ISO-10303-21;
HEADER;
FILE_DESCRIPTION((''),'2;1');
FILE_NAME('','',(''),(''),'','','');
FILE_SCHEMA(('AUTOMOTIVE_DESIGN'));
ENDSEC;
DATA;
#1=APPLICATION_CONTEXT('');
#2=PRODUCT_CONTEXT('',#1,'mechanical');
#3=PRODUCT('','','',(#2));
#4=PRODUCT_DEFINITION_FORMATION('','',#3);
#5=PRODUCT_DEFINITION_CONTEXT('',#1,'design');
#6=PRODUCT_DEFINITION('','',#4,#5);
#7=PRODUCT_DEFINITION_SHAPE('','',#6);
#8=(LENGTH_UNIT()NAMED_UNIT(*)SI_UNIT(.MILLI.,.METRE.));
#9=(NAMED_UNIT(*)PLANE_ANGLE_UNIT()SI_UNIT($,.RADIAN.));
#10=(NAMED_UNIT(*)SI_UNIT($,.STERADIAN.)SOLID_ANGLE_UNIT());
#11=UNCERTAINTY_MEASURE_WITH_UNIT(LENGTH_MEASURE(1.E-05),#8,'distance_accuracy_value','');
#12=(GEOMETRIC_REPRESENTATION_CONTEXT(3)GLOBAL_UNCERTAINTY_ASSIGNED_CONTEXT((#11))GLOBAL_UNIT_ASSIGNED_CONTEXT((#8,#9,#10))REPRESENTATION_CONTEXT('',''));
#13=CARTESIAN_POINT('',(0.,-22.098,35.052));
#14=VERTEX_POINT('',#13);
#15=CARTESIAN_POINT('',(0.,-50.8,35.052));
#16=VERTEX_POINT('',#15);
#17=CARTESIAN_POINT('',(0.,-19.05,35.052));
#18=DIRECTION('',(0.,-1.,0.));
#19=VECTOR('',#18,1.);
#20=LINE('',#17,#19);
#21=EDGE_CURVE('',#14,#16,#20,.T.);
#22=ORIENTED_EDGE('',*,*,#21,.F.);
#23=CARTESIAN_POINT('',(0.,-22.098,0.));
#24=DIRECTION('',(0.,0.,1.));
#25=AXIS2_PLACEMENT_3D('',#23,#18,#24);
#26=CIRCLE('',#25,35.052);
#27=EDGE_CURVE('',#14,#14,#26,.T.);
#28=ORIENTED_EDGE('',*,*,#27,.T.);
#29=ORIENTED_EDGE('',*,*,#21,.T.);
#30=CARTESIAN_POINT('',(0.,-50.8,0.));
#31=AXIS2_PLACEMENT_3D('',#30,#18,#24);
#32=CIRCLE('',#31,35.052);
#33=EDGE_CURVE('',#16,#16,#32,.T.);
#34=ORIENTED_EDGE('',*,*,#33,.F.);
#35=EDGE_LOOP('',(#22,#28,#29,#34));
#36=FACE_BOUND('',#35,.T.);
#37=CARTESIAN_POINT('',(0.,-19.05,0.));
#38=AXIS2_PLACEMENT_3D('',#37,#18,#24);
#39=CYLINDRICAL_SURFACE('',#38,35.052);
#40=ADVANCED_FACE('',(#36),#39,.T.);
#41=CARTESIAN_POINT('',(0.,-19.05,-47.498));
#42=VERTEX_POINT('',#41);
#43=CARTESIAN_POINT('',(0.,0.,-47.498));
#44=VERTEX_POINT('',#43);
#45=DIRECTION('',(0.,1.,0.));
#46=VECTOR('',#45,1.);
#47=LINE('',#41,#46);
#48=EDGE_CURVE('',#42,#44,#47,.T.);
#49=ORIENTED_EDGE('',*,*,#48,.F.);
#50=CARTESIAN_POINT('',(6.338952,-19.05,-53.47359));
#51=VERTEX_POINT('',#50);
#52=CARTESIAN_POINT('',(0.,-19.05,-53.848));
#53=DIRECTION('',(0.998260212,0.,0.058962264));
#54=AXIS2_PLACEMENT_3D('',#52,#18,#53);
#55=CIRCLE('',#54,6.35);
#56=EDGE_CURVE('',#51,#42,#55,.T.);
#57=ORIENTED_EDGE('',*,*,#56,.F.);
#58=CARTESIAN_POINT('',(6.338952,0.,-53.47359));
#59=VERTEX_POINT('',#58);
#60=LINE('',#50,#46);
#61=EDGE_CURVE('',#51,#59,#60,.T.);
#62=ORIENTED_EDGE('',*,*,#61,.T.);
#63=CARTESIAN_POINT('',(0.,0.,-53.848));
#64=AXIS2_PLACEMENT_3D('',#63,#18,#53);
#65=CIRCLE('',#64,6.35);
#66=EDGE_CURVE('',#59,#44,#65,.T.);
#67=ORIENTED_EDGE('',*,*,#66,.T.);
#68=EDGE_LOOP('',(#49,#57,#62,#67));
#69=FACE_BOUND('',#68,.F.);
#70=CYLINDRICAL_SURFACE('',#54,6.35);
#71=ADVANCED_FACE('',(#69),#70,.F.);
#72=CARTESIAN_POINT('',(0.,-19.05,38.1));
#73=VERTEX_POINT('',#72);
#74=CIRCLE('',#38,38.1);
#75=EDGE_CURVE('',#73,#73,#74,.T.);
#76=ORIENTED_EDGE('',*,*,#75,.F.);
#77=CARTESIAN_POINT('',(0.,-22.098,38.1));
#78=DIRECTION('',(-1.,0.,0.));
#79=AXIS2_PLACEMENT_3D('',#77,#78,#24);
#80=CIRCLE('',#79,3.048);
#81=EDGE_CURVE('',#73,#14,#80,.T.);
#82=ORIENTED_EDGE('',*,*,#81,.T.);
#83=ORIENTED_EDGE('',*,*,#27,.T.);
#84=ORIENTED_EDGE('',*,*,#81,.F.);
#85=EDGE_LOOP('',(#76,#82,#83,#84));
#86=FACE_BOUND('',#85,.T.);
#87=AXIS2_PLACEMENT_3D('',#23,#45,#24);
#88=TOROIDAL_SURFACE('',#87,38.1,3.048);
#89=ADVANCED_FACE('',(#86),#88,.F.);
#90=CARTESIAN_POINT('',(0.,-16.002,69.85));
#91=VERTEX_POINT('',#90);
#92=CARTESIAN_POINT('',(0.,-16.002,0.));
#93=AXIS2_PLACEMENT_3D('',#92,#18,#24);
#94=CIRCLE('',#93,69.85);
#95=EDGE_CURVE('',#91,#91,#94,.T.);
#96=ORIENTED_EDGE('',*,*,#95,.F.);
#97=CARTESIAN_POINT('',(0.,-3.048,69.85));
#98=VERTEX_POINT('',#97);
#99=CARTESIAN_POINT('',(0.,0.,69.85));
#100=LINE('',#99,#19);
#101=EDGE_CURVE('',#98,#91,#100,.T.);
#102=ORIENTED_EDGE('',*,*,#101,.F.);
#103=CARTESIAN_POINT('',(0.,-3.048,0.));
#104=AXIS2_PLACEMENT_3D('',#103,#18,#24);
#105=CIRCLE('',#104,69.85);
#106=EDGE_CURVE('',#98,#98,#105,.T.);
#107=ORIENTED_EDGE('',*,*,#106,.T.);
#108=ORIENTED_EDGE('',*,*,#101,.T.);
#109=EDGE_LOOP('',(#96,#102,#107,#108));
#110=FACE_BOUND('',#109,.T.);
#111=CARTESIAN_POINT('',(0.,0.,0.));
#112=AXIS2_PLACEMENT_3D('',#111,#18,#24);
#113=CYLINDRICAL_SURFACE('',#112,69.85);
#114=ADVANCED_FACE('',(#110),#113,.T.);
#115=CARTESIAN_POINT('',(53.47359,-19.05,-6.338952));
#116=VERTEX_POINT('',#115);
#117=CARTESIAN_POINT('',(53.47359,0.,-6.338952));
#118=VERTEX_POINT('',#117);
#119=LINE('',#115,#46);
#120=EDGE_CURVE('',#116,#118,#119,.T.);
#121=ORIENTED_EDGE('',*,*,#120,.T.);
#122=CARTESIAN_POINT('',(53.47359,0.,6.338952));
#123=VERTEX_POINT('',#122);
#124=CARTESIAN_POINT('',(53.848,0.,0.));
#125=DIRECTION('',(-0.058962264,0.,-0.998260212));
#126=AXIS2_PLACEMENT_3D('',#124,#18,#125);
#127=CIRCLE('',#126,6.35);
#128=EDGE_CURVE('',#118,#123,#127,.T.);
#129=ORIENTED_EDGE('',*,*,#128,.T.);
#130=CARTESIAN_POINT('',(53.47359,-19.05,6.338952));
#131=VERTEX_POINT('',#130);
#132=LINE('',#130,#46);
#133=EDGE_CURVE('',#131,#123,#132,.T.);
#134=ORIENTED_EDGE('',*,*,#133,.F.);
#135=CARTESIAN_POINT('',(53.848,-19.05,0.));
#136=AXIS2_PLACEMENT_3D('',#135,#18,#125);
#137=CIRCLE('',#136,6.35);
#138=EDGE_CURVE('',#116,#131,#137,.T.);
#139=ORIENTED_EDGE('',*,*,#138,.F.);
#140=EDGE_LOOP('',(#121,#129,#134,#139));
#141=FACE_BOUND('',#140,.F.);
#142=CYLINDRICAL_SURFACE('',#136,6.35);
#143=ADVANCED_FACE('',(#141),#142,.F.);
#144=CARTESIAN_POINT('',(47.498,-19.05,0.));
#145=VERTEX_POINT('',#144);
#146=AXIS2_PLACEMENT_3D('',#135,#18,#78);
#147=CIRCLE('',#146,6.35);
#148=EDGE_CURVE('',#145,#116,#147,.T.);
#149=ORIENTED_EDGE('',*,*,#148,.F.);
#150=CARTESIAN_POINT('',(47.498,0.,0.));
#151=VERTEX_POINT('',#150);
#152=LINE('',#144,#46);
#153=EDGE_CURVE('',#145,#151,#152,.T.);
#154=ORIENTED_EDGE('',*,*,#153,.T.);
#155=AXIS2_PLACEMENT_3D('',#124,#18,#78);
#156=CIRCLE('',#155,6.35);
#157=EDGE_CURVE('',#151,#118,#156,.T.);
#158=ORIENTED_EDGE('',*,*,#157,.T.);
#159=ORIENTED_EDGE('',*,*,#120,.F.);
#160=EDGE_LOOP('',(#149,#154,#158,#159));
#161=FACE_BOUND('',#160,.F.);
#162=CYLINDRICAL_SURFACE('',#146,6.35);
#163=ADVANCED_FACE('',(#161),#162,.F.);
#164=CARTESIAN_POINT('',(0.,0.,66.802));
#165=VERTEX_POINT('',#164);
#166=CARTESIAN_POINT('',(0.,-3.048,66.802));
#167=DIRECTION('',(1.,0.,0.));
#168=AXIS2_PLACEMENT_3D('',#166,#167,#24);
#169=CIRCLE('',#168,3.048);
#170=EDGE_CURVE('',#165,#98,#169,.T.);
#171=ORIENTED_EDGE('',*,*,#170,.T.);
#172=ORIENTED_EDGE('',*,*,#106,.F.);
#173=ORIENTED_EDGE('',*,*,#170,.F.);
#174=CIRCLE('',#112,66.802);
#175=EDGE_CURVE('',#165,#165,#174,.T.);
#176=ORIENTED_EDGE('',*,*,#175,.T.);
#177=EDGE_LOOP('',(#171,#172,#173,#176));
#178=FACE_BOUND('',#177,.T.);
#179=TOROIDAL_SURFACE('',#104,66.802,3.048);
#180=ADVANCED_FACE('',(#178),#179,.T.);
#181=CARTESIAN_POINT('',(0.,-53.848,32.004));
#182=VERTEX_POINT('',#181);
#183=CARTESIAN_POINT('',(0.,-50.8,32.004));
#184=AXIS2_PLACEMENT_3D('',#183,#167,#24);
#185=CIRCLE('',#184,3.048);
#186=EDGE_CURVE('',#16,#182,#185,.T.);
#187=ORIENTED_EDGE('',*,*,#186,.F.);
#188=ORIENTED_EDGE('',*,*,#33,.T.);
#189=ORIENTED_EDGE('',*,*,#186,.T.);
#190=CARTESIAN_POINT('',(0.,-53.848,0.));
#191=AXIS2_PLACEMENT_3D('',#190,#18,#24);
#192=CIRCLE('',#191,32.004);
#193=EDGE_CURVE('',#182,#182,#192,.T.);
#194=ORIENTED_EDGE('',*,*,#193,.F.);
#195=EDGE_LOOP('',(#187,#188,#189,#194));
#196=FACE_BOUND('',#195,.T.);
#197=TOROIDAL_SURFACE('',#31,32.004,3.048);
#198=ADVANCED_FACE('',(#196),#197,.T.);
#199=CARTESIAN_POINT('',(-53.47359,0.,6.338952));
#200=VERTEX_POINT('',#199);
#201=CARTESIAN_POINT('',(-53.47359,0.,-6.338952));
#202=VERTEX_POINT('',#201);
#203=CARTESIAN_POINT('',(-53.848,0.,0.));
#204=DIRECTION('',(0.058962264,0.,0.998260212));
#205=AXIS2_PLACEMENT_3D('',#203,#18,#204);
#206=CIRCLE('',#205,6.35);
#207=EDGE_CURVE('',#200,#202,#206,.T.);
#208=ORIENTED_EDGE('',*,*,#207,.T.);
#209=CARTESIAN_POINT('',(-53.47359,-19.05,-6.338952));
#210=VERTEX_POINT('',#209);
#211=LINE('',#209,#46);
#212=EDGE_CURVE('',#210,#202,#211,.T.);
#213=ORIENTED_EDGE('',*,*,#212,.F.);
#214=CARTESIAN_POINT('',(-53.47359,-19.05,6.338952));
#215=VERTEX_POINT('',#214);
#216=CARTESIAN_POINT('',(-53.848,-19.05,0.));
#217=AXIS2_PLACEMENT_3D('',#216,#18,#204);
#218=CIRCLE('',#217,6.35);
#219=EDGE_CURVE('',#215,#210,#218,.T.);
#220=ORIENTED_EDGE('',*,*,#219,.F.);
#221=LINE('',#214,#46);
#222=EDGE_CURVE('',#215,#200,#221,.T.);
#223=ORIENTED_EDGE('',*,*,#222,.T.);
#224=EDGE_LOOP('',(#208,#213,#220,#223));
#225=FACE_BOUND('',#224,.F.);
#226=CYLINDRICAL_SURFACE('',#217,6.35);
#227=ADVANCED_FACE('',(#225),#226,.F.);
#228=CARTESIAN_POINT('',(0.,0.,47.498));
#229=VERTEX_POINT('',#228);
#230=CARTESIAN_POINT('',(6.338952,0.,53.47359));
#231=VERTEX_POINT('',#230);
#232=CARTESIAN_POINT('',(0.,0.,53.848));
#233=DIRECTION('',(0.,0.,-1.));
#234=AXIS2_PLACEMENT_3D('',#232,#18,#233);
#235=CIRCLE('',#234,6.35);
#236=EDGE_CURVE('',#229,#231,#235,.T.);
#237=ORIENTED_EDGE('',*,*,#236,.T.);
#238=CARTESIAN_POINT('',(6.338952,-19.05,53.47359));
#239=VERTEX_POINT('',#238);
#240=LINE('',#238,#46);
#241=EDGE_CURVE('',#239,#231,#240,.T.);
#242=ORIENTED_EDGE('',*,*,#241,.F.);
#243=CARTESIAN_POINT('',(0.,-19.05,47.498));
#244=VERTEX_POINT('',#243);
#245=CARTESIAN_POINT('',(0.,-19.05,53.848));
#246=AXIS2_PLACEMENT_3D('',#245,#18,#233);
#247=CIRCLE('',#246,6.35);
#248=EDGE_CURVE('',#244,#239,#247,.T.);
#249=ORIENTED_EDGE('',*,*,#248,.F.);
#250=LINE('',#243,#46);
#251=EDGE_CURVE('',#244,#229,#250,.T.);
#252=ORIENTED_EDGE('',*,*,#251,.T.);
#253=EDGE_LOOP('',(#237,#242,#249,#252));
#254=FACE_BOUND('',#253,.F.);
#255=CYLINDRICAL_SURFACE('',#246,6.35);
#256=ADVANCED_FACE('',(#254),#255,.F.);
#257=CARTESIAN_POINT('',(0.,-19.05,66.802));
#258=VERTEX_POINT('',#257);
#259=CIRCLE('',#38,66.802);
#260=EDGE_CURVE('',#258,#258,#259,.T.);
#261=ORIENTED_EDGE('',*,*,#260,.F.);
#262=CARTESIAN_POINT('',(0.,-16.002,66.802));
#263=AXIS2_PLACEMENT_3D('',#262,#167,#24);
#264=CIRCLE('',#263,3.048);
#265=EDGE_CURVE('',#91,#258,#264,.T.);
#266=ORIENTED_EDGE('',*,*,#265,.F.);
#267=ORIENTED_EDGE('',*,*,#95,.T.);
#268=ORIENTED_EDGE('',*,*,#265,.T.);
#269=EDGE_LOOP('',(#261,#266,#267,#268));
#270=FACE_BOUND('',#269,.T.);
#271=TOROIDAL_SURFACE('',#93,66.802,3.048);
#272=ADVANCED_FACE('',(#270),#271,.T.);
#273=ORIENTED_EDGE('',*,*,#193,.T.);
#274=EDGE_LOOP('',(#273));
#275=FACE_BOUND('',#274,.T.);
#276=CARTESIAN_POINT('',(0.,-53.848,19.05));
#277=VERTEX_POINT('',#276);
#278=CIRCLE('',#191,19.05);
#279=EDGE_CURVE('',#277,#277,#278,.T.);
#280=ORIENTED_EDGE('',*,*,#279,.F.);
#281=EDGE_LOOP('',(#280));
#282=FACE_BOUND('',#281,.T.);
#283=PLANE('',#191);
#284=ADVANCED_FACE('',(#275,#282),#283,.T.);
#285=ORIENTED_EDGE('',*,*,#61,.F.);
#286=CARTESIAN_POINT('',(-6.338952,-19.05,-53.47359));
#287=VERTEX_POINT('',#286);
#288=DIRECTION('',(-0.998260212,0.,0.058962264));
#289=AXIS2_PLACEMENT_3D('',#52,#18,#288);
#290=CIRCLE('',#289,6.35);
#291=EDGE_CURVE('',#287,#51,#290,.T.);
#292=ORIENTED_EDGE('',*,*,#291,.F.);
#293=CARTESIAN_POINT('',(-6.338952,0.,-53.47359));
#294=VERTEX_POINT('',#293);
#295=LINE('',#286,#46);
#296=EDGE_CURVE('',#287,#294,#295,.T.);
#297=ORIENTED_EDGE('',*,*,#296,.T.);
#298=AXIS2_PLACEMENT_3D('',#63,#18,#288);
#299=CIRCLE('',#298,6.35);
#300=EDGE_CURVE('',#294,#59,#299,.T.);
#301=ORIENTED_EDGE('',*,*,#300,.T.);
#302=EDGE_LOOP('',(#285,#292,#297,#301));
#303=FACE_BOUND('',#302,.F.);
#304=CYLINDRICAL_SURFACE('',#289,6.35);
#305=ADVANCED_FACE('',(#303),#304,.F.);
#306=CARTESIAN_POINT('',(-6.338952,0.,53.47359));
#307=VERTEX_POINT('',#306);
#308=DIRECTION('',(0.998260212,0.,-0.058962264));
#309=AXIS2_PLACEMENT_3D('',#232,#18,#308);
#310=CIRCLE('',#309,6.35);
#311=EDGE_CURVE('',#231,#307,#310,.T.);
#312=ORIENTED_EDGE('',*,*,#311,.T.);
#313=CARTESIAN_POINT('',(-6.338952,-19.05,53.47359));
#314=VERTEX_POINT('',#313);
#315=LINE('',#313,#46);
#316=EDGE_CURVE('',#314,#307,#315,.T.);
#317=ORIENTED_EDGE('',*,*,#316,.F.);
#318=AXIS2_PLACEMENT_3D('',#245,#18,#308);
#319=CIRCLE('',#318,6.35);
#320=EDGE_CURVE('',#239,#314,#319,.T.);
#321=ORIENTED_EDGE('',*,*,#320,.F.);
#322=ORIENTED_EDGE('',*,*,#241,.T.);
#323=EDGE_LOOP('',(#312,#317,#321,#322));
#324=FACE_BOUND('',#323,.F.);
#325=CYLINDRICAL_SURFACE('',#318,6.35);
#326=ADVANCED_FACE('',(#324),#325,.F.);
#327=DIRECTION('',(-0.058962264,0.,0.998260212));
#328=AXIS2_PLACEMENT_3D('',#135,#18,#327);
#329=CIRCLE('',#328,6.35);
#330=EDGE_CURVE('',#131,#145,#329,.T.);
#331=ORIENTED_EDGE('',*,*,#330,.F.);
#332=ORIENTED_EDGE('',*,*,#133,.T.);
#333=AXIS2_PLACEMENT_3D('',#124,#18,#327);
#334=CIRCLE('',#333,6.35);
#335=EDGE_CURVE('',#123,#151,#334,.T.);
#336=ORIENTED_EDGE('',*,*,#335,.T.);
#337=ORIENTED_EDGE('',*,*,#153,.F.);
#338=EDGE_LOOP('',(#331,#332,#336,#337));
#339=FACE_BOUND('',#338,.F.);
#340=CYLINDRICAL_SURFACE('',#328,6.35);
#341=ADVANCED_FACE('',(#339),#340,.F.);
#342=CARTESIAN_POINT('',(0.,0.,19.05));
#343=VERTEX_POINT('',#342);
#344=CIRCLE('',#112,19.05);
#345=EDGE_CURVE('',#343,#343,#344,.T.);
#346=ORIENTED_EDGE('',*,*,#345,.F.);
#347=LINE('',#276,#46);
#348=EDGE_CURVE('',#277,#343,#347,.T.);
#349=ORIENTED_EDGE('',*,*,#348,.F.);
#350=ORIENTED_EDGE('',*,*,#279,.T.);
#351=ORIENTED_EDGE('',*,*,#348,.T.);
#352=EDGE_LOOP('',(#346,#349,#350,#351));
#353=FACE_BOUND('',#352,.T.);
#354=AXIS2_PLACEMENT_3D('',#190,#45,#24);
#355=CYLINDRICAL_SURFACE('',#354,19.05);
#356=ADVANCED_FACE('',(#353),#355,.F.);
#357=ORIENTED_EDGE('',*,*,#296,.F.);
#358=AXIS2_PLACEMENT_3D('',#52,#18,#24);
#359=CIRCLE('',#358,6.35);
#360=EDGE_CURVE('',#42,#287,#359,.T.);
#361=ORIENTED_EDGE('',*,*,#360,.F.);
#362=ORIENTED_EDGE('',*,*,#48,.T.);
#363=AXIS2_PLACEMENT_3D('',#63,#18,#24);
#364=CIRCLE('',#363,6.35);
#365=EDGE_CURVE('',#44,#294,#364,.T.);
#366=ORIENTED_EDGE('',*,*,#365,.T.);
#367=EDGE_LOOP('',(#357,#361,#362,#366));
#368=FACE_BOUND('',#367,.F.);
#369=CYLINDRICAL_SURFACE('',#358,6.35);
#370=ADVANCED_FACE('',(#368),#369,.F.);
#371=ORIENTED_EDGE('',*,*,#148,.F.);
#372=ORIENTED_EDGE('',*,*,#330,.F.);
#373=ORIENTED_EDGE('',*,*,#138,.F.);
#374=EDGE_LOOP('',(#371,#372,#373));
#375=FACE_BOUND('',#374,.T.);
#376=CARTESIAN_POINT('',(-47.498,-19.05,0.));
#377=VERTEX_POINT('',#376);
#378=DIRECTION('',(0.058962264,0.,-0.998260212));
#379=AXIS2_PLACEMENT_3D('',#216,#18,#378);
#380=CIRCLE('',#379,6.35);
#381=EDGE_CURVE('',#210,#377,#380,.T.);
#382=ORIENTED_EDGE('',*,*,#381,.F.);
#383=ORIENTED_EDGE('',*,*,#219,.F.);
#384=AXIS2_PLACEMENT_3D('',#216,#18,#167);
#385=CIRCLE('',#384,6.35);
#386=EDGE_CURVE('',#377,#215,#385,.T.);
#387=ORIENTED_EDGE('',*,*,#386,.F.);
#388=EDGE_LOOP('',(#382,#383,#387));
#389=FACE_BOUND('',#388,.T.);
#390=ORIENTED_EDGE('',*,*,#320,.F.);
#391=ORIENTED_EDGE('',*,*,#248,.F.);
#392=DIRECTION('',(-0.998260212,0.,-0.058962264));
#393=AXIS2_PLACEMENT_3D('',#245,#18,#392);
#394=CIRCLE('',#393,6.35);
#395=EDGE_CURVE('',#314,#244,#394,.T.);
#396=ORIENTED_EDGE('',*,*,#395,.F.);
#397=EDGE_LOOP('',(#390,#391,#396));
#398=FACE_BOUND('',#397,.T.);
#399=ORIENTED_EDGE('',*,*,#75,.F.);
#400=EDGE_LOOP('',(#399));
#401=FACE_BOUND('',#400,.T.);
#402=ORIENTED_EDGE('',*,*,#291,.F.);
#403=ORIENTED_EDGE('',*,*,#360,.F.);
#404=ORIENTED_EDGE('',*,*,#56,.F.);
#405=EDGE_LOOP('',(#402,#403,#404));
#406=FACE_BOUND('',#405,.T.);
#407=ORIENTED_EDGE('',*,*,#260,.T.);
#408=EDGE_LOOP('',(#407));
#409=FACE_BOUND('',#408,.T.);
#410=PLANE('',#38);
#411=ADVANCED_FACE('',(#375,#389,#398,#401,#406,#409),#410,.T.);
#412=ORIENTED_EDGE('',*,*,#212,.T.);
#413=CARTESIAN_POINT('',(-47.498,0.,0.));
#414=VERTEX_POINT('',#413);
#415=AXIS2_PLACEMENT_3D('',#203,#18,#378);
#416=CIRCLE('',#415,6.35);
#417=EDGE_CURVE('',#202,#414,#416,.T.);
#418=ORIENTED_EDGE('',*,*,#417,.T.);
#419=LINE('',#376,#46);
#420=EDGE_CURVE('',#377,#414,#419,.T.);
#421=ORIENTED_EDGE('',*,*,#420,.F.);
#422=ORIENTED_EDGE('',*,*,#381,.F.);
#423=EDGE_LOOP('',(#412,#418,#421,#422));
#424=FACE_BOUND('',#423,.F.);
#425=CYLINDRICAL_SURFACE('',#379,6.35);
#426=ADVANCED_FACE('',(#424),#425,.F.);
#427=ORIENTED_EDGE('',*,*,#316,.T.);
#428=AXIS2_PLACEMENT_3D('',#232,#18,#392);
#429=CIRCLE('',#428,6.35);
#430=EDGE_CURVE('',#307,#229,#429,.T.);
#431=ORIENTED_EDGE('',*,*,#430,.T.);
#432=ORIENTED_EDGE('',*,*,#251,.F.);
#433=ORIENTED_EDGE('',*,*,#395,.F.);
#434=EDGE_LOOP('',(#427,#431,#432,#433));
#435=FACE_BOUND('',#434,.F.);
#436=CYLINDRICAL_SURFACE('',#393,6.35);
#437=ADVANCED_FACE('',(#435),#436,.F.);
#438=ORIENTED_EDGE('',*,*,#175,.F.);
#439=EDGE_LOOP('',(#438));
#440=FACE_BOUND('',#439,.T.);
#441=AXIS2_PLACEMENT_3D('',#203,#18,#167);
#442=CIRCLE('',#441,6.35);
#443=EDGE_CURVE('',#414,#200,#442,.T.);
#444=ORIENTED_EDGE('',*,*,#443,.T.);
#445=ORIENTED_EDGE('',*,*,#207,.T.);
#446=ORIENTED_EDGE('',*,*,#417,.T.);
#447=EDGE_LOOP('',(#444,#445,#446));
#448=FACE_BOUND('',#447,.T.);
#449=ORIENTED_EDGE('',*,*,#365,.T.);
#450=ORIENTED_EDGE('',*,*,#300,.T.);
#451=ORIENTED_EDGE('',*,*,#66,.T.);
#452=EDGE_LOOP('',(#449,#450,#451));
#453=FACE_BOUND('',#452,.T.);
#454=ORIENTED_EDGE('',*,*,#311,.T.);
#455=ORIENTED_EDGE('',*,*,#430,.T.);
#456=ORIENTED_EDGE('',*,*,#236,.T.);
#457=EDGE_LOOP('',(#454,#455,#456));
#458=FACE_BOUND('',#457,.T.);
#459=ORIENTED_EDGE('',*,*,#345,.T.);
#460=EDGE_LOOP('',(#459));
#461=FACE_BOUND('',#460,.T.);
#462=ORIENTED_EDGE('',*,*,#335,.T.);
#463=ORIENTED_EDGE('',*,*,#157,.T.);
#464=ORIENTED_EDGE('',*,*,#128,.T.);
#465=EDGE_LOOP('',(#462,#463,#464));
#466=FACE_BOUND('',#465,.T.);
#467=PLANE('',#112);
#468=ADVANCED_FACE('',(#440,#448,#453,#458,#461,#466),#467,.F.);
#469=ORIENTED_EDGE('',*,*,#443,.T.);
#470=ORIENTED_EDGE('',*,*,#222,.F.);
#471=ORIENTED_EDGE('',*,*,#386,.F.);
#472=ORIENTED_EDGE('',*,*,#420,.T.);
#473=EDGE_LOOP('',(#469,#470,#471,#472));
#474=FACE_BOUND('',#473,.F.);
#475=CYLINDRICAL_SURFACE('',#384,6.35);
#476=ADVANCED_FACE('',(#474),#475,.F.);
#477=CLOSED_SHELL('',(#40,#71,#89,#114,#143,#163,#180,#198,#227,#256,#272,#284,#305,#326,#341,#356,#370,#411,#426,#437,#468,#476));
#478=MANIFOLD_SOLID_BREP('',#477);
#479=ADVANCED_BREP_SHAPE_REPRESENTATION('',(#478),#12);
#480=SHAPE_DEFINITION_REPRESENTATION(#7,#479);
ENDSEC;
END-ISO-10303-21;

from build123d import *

# Parameters (mm, degrees)
F3_R            = 3.048
F4_DEPTH        = 19.051
F4_COPIES_COUNT = 4


# Not quite as in the source:
# - a pattern or mirror of a feature is missing from the dataset's text; its kind, count and spacing are read off the source's solid


with BuildPart() as f1:
    # F0 (on Right) → F1 (revolve)
    with BuildSketch(Plane.YZ):
        Polygon((-53.848, 19.05), (0, 19.05), (0, 69.85), (-19.05, 69.85), (-19.05, 35.052), (-53.848, 35.052), align=None)
    revolve(axis=Axis((0, -26.924, 0), (0, -1, 0)))

    # F3
    f3_edges = [f1.edges().sort_by_distance(p)[0] for p in [
        (0, -19.05, -69.85),
        (0, 0, -69.85),
        (0, -19.05, -35.052),
        (0, -53.848, -35.052),
    ]]
    fillet(f3_edges, radius=F3_R)

    # F2 (on face) → F4 (cut, through all)
    with BuildSketch(Plane.XZ.offset(19.05)):
        with BuildLine():
            ThreePointArc((-47.498, 0), (-49.2273936601, 4.3557429965), (-53.4735896226, 6.3389523479))
            ThreePointArc((-53.4735896226, 6.3389523479), (-53.848, 0), (-53.4735896226, -6.3389523479))
            ThreePointArc((-53.4735896226, -6.3389523479), (-49.2273936601, -4.3557429965), (-47.498, 0))
        make_face()
        with BuildLine():
            ThreePointArc((-53.4735896226, -6.3389523479), (-53.848, 0), (-53.4735896226, 6.3389523479))
            ThreePointArc((-53.4735896226, 6.3389523479), (-60.198, 0), (-53.4735896226, -6.3389523479))
        make_face()
    f4 = extrude(amount=-F4_DEPTH, mode=Mode.SUBTRACT)

    # F4_copies: F4 ×4 about axis
    f4_copies_axis = Axis((0, 0, 0), (0, 1, 0))
    for i in range(1, F4_COPIES_COUNT):
        add(f4.rotate(f4_copies_axis, i * 360 / F4_COPIES_COUNT), mode=Mode.SUBTRACT)


solid = f1.part
